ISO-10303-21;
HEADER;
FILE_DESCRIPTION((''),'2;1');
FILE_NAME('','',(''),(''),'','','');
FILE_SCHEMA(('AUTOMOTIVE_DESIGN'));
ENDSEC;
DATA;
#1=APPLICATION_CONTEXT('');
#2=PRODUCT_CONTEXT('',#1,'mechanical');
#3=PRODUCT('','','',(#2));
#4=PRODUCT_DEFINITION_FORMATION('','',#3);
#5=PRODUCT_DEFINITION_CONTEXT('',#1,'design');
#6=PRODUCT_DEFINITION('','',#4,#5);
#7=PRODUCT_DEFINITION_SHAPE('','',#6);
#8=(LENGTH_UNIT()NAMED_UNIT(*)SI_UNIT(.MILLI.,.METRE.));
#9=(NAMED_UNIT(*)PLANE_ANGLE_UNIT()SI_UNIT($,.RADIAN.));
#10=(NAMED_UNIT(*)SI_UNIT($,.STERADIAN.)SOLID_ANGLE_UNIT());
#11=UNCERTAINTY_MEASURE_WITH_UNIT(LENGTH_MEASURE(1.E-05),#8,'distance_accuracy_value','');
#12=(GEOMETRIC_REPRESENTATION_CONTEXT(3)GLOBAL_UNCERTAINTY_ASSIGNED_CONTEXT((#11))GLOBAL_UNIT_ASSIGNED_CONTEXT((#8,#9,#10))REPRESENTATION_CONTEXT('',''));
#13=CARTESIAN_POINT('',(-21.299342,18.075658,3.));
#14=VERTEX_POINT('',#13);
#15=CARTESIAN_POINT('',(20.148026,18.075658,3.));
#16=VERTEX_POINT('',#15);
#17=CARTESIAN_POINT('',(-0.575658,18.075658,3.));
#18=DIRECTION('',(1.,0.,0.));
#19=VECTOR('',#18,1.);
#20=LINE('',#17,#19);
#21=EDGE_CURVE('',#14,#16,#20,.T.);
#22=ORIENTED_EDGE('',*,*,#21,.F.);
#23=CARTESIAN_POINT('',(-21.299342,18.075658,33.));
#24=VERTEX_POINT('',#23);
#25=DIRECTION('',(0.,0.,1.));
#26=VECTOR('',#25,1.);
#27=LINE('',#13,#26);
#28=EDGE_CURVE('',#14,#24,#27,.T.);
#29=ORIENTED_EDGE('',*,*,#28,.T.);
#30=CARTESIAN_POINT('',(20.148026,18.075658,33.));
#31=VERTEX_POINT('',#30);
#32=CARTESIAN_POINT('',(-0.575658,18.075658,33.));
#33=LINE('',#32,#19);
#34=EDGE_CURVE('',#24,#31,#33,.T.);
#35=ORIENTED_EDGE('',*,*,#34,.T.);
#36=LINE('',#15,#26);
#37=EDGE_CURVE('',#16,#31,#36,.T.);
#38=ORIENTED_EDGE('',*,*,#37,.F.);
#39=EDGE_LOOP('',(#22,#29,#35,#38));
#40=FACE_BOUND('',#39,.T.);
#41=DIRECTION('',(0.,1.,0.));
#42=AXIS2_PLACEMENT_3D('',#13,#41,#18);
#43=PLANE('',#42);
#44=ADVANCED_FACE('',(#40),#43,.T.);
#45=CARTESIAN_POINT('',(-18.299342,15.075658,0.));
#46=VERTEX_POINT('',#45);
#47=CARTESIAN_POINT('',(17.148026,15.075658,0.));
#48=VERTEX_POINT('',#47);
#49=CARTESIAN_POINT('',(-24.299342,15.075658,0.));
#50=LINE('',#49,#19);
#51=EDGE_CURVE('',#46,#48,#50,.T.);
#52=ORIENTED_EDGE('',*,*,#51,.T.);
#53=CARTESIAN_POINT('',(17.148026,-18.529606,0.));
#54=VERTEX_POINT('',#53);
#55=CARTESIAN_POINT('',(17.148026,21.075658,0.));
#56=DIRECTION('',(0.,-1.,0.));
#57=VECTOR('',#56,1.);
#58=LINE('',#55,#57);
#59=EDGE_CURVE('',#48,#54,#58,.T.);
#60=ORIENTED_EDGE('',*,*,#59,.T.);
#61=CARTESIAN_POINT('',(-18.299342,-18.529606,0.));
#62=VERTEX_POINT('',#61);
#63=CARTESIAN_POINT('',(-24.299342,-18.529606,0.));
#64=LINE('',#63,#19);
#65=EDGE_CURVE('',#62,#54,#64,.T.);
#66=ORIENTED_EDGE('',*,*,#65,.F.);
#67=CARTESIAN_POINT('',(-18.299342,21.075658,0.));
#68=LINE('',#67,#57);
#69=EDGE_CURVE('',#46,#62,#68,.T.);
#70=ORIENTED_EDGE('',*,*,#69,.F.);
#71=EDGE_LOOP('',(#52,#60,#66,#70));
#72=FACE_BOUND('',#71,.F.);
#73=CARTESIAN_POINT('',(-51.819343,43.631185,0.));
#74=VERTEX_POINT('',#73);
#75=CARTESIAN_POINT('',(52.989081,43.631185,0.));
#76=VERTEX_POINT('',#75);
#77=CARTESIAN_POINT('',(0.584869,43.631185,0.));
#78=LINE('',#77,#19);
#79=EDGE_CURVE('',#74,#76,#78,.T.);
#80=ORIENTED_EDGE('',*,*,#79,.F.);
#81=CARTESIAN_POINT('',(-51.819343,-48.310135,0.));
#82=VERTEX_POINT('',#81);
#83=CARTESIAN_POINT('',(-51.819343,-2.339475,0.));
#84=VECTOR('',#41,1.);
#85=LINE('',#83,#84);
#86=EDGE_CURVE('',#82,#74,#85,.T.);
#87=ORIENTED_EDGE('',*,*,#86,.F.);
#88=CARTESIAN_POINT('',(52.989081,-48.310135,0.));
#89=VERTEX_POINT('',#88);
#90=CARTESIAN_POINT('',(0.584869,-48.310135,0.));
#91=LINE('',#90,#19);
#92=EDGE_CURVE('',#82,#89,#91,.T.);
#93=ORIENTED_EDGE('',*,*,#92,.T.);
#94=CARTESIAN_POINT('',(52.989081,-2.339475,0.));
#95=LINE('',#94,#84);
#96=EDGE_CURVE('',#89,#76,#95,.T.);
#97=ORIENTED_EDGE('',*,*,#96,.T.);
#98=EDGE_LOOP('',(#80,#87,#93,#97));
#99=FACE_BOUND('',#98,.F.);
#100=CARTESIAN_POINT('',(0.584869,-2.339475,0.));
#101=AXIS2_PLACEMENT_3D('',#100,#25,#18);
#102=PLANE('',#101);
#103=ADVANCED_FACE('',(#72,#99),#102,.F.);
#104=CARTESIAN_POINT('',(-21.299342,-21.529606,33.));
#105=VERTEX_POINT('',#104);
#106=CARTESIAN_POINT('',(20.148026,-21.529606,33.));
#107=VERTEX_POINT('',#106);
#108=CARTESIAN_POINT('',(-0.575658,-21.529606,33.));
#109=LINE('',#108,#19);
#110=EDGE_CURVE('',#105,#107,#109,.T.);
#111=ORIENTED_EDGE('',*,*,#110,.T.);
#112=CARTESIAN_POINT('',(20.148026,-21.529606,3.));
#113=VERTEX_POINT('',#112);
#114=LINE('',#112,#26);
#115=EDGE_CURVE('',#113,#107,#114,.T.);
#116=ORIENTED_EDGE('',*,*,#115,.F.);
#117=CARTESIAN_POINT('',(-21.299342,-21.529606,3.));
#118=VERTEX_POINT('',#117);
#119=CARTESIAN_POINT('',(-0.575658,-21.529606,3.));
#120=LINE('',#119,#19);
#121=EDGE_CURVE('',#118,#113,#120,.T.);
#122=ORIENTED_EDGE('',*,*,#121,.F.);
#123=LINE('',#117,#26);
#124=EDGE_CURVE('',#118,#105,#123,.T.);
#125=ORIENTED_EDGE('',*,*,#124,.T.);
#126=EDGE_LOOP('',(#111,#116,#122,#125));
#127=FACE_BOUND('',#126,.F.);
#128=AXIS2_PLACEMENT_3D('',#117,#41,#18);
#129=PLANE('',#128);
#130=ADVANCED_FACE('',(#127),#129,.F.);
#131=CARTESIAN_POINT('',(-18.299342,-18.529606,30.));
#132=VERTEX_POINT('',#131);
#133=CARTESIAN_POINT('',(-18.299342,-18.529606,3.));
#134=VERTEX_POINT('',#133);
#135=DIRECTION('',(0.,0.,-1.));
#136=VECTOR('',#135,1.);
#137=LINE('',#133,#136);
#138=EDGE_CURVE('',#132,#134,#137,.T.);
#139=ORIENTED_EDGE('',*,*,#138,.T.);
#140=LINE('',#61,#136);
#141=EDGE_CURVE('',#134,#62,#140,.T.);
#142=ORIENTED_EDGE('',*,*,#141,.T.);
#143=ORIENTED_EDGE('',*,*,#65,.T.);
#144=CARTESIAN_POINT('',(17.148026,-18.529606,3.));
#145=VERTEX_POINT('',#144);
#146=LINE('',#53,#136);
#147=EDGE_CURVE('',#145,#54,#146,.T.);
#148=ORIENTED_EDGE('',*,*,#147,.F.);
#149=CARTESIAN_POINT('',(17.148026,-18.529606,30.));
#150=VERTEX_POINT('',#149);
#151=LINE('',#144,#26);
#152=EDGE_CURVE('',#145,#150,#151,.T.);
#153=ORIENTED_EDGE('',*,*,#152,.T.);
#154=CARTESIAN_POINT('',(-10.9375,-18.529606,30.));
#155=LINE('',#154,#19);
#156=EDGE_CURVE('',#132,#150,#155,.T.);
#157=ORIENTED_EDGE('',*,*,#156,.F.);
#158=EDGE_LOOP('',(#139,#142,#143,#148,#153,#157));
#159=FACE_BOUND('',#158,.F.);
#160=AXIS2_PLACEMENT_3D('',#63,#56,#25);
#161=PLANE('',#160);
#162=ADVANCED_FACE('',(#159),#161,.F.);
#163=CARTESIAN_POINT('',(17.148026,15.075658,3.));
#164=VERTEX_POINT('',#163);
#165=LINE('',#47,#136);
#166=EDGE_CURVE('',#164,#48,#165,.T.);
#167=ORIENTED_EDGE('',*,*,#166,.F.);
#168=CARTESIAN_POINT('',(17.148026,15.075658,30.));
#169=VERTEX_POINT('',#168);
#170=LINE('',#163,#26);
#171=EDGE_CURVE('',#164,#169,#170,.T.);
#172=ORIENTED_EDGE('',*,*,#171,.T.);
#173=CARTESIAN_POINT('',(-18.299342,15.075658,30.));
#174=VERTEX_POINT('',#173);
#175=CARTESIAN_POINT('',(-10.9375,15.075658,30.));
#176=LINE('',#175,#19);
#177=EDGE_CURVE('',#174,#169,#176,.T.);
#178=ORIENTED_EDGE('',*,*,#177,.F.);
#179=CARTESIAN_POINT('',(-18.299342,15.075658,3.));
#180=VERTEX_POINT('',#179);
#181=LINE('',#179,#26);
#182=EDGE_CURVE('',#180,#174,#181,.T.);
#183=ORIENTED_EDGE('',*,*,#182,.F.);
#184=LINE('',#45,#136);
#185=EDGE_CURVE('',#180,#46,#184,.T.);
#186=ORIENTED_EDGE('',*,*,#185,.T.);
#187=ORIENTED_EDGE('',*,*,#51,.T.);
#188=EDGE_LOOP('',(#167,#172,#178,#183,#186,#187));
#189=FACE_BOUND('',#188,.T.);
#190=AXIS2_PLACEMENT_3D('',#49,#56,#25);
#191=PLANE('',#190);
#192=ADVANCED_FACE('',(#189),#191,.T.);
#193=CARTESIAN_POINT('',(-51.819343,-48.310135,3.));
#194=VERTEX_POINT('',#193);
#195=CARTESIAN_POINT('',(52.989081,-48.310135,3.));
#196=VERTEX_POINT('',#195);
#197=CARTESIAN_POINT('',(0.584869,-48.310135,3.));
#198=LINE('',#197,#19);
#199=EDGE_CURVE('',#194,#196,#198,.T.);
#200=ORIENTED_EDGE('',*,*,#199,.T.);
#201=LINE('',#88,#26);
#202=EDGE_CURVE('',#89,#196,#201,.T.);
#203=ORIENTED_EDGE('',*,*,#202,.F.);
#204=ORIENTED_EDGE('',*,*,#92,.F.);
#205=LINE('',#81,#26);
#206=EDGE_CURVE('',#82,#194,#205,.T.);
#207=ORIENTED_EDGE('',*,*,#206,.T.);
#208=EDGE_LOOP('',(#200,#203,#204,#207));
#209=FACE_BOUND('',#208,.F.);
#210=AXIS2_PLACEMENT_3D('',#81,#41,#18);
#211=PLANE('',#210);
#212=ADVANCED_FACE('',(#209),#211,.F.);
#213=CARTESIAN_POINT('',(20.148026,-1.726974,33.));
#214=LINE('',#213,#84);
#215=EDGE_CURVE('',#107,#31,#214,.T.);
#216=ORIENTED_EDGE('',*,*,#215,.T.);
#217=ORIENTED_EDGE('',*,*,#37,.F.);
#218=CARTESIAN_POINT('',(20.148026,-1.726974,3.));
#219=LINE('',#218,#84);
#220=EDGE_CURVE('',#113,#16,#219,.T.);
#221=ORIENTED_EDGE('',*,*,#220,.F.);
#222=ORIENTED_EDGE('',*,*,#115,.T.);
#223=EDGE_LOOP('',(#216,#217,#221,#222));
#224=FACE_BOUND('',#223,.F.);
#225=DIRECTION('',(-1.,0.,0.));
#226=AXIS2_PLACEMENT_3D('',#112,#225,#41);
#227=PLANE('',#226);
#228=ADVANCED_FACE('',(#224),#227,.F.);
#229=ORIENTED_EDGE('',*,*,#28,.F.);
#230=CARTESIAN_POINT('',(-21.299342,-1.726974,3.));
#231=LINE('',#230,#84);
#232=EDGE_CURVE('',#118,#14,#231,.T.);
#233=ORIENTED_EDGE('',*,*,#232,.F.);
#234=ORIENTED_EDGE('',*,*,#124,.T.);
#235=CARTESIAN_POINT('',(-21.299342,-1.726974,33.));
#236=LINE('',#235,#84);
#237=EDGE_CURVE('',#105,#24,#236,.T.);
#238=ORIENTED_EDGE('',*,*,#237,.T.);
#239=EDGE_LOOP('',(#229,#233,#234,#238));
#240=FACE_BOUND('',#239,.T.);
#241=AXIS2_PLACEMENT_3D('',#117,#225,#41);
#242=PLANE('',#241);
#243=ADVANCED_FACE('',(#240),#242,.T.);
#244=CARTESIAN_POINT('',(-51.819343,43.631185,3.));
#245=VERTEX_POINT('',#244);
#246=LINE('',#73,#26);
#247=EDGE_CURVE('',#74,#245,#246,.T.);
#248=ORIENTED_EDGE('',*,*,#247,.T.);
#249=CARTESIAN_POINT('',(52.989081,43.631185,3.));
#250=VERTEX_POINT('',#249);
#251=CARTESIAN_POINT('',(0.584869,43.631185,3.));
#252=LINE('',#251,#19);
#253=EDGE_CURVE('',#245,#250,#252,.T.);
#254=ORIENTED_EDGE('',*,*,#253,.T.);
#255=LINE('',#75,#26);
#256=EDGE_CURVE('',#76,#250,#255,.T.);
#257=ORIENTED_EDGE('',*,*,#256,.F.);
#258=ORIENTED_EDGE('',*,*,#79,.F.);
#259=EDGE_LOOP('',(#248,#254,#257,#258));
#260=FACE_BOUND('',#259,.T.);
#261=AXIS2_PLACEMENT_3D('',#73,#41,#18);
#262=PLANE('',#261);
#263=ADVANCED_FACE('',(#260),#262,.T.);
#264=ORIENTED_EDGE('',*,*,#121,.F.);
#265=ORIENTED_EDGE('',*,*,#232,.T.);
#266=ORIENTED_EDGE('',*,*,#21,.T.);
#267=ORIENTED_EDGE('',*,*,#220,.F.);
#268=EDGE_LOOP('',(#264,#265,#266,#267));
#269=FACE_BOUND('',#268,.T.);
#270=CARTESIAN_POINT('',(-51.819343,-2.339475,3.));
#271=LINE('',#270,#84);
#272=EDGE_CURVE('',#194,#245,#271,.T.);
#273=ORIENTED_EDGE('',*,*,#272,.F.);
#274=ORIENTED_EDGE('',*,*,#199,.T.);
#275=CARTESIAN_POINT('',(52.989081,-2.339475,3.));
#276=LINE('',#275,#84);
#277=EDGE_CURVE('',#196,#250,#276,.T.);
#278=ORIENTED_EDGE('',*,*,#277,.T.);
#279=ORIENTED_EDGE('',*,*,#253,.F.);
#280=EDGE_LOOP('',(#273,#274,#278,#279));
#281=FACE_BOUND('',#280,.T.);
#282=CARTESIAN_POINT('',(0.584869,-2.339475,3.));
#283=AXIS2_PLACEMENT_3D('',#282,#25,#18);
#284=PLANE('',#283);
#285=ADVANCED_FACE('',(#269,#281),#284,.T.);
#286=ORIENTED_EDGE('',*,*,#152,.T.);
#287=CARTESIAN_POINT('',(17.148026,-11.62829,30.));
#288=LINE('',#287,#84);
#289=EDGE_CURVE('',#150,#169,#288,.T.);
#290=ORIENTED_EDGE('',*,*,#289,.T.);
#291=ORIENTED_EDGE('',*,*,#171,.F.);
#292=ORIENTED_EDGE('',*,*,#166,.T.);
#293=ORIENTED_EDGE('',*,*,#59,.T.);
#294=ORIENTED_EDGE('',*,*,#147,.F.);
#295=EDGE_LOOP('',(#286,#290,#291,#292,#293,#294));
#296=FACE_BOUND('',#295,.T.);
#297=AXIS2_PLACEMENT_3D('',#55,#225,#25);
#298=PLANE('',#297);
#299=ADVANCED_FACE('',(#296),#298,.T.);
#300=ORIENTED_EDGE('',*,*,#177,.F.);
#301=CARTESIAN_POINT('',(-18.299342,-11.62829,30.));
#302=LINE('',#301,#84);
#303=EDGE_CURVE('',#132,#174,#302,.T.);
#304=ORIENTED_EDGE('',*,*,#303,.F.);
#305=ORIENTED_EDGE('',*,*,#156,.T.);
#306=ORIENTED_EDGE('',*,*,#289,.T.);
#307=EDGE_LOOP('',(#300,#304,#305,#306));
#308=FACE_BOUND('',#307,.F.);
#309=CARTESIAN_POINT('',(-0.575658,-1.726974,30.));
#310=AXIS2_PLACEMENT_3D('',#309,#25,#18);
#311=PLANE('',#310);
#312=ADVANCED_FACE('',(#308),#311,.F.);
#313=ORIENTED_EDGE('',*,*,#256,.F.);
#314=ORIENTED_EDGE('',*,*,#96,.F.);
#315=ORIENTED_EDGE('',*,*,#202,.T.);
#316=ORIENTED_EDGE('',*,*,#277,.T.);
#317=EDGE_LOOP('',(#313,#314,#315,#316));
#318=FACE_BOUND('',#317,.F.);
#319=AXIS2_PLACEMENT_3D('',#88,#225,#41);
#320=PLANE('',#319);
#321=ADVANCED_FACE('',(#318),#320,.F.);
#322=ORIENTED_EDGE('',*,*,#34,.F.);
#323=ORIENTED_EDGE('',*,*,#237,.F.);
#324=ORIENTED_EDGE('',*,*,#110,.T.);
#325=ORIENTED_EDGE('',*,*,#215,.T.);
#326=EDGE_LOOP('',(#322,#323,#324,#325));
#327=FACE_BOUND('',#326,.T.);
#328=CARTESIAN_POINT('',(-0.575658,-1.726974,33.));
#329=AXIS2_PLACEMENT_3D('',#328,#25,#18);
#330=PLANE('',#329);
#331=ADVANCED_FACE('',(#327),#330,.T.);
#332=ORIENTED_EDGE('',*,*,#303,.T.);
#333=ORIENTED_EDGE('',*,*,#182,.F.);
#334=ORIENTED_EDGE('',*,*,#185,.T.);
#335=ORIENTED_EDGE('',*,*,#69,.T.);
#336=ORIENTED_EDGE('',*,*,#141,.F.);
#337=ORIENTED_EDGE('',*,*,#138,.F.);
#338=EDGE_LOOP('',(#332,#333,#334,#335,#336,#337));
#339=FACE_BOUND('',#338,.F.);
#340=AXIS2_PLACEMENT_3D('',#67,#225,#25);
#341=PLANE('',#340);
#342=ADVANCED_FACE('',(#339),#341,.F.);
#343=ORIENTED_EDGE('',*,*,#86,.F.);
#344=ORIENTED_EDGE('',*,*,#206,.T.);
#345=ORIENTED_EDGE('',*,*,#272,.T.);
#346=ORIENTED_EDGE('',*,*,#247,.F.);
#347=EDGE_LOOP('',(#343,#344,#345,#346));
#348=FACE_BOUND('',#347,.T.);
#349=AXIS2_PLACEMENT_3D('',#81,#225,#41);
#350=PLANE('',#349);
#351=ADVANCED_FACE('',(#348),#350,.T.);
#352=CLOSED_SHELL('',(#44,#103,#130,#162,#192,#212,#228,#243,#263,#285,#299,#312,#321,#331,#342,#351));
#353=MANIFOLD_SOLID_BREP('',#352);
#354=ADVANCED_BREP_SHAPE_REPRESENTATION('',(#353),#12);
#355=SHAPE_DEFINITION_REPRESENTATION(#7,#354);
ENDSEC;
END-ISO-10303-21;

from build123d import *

# Parameters (mm, degrees)
F0_W        = 104.8084236681
F0_H        = 91.941319406
F1_DEPTH    = 3
F2_W        = 41.4473675191
F2_H        = 39.6052636206
F3_DEPTH    = 30
F4_T        = 3
F4_T3_DEPTH = 47.4473675191
F4_T5_DEPTH = 45.6052636206


# Not quite as in the source:
# - a shell that OpenCascade refuses in one call is made with other operations: the cavity is built on its own and cut out


with BuildPart() as f1:
    # F0 (on Top) → F1 (new body)
    with BuildSketch(Plane.XY):
        with Locations((0.5848687142, -2.3394748569)):
            Rectangle(F0_W, F0_H)
    extrude(amount=F1_DEPTH)

    # F2 (on face) → F3 (join)
    with BuildSketch(Plane.XY.offset(3)):
        with Locations((-0.575657934, -1.7269738019)):
            Rectangle(F2_W, F2_H)
    extrude(amount=F3_DEPTH)

    # F4: shell of thickness 3, made by hand


with BuildPart() as f4_core1:
    # F4_t2: copy of F1
    add(f1.part)

    # the walls: a layer under each face that stays
    f4_faces = [f4_core1.faces().sort_by_distance(p)[0] for p in [
        (0.5848687142, 43.6311848462, 1.5),
        (52.9890805483, -2.3394748569, 1.5),
        (-51.8193431199, -2.3394748569, 1.5),
        (-34.3512725085, -32.9865813255, 3),
        (0.5848687142, -48.3101345599, 1.5),
        (-0.575657934, 18.0756580085, 18),
        (-21.2993416935, -1.7269738019, 18),
        (-0.575657934, -21.5296056122, 18),
        (20.1480258256, -1.7269738019, 18),
        (-0.575657934, -1.7269738019, 33),
    ]]
    thicken(f4_faces, amount=-F4_T, mode=Mode.SUBTRACT)

    # F4_s4 → F4_t3 (cut)
    with BuildSketch(Plane.YZ.offset(-24.2993416935)):
        Polygon((18.1056580085, 3.03), (18.0756580085, 0), (15.0756580085, 0), (15.0756580085, 3), align=None)
        Polygon((-21.5596056122, 3.03), (-21.5296056122, 0), (-18.5296056122, 0), (-18.5296056122, 3), align=None)
    extrude(amount=F4_T3_DEPTH, mode=Mode.SUBTRACT)

    # F4_s6 → F4_t5 (cut)
    with BuildSketch(Plane.XZ.offset(-21.0756580085)):
        Polygon((-21.3293416935, 3.03), (-21.2993416935, 0), (-18.2993416935, 0), (-18.2993416935, 3), align=None)
        Polygon((20.1780258256, 3.03), (20.1480258256, 0), (17.1480258256, 0), (17.1480258256, 3), align=None)
    extrude(amount=F4_T5_DEPTH, mode=Mode.SUBTRACT)


with BuildPart() as f1_1:
    add(f1.part)

    # what is left inside the walls is the cavity
    f4_cavity = [f4_core1.part.solids().sort_by_distance(p)[0] for p in [
        (-0.575658, -7.327851, 0.03),
    ]]
    add(f4_cavity, mode=Mode.SUBTRACT)


solid = f1_1.part
